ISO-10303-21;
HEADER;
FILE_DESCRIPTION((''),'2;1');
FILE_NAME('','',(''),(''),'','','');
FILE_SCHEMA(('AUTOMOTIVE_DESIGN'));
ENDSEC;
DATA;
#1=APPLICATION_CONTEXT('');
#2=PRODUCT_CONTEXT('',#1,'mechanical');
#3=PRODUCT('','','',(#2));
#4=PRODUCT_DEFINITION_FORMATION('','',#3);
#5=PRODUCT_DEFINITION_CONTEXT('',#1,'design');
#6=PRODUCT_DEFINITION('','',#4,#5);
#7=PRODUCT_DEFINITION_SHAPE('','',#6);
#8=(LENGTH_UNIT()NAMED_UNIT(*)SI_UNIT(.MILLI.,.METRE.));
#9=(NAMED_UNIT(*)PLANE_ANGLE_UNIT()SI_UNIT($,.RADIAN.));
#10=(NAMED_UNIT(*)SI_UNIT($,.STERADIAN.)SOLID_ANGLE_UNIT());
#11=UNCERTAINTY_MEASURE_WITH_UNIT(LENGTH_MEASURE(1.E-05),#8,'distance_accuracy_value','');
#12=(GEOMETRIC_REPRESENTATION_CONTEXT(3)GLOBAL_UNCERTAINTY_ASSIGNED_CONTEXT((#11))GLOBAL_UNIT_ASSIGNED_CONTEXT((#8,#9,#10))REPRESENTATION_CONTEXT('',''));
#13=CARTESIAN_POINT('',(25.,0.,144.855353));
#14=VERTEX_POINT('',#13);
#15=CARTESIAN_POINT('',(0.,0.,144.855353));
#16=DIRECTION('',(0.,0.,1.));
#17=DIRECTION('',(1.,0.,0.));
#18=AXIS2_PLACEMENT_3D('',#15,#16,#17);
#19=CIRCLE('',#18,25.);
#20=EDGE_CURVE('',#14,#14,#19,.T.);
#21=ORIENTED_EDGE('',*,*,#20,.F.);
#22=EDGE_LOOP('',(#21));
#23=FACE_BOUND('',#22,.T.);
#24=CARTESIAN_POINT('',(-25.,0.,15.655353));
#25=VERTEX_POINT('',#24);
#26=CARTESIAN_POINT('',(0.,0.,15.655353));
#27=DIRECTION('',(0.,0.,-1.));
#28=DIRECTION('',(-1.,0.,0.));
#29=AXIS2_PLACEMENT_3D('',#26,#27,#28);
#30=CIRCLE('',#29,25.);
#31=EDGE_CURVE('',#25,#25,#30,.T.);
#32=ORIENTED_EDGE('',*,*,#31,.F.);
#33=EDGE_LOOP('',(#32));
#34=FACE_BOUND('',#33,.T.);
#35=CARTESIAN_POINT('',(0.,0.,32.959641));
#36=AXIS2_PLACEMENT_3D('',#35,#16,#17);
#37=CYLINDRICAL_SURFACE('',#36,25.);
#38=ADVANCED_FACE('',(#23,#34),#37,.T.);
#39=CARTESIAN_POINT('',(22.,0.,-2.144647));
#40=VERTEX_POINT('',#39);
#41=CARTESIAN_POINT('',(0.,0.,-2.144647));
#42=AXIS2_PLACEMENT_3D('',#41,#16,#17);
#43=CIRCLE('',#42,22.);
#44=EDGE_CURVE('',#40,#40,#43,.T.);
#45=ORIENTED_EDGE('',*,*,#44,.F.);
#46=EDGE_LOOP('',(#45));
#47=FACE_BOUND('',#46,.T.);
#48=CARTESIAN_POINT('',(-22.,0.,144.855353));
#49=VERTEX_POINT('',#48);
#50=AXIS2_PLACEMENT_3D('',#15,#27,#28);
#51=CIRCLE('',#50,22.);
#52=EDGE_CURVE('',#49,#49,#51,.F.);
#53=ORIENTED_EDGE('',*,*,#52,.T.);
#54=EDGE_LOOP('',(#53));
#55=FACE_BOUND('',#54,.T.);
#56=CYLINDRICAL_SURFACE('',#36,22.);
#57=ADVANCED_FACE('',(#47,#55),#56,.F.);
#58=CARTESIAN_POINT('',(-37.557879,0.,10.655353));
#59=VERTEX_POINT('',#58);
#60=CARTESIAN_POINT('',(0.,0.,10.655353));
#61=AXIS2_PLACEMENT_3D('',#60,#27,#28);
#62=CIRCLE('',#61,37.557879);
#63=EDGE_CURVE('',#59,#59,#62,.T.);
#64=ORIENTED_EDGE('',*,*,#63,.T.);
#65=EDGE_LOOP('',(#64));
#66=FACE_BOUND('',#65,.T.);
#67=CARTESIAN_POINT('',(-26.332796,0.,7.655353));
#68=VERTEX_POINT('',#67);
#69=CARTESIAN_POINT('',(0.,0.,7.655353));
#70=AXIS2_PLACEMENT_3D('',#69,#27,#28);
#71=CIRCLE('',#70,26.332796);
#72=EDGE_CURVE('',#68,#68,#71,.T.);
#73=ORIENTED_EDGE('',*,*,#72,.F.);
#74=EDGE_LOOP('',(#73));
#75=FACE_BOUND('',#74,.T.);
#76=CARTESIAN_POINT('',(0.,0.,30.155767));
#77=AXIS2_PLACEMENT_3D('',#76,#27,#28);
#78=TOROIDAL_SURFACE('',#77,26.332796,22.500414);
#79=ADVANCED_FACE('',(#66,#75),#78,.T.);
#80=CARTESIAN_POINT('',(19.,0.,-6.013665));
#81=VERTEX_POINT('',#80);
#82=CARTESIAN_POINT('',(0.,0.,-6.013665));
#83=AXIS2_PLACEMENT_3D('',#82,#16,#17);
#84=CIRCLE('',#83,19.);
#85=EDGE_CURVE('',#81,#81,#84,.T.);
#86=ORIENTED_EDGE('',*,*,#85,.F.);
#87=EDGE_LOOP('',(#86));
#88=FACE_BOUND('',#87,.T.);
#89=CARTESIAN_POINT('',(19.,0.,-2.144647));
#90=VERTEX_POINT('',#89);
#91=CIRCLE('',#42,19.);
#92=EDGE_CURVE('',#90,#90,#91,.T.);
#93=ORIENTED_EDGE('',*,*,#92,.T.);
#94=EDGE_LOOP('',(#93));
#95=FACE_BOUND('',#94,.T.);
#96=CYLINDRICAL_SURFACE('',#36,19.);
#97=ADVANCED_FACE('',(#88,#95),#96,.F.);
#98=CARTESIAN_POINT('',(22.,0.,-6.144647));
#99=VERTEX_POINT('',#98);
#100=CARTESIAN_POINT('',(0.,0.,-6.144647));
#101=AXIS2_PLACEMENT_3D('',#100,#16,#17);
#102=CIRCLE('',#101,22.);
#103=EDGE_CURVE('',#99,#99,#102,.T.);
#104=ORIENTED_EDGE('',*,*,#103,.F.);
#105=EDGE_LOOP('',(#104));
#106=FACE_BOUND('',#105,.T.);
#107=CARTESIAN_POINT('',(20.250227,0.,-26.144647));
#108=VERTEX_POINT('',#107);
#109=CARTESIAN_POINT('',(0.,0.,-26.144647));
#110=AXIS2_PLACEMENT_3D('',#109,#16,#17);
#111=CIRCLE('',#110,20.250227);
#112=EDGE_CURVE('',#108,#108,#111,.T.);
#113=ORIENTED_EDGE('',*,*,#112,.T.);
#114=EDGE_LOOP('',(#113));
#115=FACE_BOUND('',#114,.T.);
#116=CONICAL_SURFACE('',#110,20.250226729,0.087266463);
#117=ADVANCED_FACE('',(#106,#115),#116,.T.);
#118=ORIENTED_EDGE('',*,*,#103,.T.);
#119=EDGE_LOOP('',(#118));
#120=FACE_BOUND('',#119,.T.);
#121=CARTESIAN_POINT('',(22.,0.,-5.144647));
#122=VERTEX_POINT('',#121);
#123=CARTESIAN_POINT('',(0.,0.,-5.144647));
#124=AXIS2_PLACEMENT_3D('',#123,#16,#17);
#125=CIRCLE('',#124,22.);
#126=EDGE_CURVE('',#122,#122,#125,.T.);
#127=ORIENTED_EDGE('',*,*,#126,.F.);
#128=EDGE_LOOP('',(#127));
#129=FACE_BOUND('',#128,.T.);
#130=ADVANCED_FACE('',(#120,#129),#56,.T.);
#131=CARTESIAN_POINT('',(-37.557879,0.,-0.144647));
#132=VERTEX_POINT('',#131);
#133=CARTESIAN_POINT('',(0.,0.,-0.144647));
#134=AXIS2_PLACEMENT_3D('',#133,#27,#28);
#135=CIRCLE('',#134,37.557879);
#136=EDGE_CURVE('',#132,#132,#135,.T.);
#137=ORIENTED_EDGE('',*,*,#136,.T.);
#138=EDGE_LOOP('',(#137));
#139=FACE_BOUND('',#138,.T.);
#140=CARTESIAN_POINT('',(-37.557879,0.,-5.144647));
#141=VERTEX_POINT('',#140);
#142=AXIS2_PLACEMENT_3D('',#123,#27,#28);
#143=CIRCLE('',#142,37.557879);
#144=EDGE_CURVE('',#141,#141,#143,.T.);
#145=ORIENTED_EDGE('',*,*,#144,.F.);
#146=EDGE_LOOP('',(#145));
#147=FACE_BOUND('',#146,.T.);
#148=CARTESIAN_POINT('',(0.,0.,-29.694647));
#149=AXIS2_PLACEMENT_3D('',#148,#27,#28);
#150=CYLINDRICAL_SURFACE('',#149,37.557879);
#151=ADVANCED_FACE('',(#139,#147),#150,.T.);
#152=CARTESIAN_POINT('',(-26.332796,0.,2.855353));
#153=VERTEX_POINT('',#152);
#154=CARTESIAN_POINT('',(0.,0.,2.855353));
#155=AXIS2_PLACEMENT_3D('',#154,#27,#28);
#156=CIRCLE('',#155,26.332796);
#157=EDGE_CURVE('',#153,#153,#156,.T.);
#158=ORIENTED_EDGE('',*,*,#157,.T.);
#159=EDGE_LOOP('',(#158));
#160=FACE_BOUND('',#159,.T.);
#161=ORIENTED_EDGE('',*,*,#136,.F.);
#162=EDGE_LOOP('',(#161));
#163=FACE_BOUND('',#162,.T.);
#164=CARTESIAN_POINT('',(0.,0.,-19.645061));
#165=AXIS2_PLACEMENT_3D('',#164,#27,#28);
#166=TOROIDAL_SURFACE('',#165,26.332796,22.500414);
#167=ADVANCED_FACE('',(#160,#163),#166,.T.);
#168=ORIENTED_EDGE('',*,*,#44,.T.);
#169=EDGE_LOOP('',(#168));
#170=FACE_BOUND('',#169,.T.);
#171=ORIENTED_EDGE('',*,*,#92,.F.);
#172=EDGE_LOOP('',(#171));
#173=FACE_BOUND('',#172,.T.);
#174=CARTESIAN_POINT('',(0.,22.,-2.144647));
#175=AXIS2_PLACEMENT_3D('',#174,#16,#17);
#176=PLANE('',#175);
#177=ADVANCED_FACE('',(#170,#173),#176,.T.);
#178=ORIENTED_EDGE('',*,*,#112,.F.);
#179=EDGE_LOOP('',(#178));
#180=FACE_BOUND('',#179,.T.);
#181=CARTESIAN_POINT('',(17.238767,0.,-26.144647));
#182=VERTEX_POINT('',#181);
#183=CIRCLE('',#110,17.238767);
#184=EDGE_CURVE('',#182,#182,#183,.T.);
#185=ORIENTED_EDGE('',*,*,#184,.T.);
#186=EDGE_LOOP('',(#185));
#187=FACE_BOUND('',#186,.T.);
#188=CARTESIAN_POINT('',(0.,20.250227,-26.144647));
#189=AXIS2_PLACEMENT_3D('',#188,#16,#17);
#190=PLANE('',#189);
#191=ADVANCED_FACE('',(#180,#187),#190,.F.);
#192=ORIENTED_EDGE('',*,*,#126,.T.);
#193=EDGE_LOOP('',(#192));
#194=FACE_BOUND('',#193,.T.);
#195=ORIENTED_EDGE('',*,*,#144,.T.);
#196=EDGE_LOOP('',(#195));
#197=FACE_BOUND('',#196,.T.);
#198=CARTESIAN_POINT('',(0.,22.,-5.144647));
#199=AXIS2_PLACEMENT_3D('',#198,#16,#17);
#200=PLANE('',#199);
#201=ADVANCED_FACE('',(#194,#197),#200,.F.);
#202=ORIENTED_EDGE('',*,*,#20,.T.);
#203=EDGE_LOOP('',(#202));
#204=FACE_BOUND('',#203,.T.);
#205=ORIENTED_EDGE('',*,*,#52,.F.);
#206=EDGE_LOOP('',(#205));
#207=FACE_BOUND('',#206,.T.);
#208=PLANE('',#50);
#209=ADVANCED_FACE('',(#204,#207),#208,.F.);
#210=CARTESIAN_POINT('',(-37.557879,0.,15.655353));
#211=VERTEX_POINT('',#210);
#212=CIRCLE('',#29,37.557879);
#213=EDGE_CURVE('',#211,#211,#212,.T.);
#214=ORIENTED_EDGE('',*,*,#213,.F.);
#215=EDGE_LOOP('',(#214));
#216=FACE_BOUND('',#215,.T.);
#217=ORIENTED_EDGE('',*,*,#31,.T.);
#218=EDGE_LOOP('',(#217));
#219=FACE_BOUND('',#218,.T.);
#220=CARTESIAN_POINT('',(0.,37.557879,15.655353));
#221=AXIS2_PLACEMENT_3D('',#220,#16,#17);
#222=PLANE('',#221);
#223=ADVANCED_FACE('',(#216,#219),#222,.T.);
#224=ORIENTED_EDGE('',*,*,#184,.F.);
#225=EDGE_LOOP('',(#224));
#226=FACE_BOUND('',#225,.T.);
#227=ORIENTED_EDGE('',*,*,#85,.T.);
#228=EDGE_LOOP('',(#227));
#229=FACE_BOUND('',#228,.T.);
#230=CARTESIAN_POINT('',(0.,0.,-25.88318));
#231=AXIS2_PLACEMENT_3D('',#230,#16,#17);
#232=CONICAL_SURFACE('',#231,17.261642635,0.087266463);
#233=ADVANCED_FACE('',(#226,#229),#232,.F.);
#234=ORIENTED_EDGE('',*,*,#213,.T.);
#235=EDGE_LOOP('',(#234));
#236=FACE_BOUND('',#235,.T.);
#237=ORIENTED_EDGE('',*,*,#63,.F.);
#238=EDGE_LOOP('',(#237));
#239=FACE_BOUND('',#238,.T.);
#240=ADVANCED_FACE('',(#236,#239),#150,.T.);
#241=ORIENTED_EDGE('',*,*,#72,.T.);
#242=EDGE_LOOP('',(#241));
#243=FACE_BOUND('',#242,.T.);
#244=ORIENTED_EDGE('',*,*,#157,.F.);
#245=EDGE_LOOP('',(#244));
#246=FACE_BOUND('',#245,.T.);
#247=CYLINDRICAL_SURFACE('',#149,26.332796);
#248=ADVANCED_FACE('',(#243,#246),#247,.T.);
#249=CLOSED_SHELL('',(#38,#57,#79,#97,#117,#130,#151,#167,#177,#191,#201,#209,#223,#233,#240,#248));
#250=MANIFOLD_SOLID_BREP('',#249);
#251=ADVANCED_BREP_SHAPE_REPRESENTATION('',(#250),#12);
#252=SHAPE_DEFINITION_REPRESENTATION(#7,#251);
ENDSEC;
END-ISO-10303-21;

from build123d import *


# Read off the part's stored shape, not the designer's step: Shell1
with BuildPart() as part:
    # Sketch3 → Revolve1 (revolve)
    with BuildSketch(Plane(origin=(0, 0, 0), x_dir=(0, 0, -1), z_dir=(1, 0, 0)), mode=Mode.PRIVATE) as revolve1_sk:
        Polygon((-144.855352602, 25), (5.144647398, 25), (5.144647398, 22), (6.144647398, 22), (26.144647398, 20.250226729), (26.144647398, 0), (-144.855352602, 0), align=None)
    revolve(revolve1_sk.sketch.rotate(Axis((0, 0, 32.959641256), (0, 0, -1)), 90), axis=Axis((0, 0, 32.959641256), (0, 0, -1)))

    # Shell1 outline → Shell1 (revolve, cut)
    with BuildSketch(Plane.XZ):
        Polygon((19, -2.144647398), (22, -2.144647398), (22, 144.855352602), (0, 144.855352602), (0, -26.144647398), (17.238767217, -26.144647398), (19, -6.013664569), align=None)
    revolve(axis=Axis((0, 0, 0), (0, 0, 1)), mode=Mode.SUBTRACT)

    # Sketch4 → Revolve3 (revolve)
    with BuildSketch(Plane(origin=(0, 0, 0), x_dir=(0, 0, -1), z_dir=(1, 0, 0)), mode=Mode.PRIVATE) as revolve3_sk:
        with BuildLine():
            Line((-15.655352602, 37.557879022), (-15.655352602, 25))
            Line((-15.655352602, 25), (5.144647398, 25))
            Line((5.144647398, 25), (5.144647398, 37.557879022))
            Line((5.144647398, 37.557879022), (0.144647398, 37.557879022))
            ThreePointArc((0.144647398, 37.557879022), (-2.092417968, 32.142324694), (-2.855352602, 26.332796239))
            Line((-2.855352602, 26.332796239), (-7.655352602, 26.332796239))
            ThreePointArc((-7.655352602, 26.332796239), (-8.418287237, 32.142324694), (-10.655352602, 37.557879022))
            Line((-10.655352602, 37.557879022), (-15.655352602, 37.557879022))
        make_face()
    revolve(revolve3_sk.sketch.rotate(Axis((0, 0, -29.694647398), (0, 0, 1)), 90), axis=Axis((0, 0, -29.694647398), (0, 0, 1)))


solid = part.part
